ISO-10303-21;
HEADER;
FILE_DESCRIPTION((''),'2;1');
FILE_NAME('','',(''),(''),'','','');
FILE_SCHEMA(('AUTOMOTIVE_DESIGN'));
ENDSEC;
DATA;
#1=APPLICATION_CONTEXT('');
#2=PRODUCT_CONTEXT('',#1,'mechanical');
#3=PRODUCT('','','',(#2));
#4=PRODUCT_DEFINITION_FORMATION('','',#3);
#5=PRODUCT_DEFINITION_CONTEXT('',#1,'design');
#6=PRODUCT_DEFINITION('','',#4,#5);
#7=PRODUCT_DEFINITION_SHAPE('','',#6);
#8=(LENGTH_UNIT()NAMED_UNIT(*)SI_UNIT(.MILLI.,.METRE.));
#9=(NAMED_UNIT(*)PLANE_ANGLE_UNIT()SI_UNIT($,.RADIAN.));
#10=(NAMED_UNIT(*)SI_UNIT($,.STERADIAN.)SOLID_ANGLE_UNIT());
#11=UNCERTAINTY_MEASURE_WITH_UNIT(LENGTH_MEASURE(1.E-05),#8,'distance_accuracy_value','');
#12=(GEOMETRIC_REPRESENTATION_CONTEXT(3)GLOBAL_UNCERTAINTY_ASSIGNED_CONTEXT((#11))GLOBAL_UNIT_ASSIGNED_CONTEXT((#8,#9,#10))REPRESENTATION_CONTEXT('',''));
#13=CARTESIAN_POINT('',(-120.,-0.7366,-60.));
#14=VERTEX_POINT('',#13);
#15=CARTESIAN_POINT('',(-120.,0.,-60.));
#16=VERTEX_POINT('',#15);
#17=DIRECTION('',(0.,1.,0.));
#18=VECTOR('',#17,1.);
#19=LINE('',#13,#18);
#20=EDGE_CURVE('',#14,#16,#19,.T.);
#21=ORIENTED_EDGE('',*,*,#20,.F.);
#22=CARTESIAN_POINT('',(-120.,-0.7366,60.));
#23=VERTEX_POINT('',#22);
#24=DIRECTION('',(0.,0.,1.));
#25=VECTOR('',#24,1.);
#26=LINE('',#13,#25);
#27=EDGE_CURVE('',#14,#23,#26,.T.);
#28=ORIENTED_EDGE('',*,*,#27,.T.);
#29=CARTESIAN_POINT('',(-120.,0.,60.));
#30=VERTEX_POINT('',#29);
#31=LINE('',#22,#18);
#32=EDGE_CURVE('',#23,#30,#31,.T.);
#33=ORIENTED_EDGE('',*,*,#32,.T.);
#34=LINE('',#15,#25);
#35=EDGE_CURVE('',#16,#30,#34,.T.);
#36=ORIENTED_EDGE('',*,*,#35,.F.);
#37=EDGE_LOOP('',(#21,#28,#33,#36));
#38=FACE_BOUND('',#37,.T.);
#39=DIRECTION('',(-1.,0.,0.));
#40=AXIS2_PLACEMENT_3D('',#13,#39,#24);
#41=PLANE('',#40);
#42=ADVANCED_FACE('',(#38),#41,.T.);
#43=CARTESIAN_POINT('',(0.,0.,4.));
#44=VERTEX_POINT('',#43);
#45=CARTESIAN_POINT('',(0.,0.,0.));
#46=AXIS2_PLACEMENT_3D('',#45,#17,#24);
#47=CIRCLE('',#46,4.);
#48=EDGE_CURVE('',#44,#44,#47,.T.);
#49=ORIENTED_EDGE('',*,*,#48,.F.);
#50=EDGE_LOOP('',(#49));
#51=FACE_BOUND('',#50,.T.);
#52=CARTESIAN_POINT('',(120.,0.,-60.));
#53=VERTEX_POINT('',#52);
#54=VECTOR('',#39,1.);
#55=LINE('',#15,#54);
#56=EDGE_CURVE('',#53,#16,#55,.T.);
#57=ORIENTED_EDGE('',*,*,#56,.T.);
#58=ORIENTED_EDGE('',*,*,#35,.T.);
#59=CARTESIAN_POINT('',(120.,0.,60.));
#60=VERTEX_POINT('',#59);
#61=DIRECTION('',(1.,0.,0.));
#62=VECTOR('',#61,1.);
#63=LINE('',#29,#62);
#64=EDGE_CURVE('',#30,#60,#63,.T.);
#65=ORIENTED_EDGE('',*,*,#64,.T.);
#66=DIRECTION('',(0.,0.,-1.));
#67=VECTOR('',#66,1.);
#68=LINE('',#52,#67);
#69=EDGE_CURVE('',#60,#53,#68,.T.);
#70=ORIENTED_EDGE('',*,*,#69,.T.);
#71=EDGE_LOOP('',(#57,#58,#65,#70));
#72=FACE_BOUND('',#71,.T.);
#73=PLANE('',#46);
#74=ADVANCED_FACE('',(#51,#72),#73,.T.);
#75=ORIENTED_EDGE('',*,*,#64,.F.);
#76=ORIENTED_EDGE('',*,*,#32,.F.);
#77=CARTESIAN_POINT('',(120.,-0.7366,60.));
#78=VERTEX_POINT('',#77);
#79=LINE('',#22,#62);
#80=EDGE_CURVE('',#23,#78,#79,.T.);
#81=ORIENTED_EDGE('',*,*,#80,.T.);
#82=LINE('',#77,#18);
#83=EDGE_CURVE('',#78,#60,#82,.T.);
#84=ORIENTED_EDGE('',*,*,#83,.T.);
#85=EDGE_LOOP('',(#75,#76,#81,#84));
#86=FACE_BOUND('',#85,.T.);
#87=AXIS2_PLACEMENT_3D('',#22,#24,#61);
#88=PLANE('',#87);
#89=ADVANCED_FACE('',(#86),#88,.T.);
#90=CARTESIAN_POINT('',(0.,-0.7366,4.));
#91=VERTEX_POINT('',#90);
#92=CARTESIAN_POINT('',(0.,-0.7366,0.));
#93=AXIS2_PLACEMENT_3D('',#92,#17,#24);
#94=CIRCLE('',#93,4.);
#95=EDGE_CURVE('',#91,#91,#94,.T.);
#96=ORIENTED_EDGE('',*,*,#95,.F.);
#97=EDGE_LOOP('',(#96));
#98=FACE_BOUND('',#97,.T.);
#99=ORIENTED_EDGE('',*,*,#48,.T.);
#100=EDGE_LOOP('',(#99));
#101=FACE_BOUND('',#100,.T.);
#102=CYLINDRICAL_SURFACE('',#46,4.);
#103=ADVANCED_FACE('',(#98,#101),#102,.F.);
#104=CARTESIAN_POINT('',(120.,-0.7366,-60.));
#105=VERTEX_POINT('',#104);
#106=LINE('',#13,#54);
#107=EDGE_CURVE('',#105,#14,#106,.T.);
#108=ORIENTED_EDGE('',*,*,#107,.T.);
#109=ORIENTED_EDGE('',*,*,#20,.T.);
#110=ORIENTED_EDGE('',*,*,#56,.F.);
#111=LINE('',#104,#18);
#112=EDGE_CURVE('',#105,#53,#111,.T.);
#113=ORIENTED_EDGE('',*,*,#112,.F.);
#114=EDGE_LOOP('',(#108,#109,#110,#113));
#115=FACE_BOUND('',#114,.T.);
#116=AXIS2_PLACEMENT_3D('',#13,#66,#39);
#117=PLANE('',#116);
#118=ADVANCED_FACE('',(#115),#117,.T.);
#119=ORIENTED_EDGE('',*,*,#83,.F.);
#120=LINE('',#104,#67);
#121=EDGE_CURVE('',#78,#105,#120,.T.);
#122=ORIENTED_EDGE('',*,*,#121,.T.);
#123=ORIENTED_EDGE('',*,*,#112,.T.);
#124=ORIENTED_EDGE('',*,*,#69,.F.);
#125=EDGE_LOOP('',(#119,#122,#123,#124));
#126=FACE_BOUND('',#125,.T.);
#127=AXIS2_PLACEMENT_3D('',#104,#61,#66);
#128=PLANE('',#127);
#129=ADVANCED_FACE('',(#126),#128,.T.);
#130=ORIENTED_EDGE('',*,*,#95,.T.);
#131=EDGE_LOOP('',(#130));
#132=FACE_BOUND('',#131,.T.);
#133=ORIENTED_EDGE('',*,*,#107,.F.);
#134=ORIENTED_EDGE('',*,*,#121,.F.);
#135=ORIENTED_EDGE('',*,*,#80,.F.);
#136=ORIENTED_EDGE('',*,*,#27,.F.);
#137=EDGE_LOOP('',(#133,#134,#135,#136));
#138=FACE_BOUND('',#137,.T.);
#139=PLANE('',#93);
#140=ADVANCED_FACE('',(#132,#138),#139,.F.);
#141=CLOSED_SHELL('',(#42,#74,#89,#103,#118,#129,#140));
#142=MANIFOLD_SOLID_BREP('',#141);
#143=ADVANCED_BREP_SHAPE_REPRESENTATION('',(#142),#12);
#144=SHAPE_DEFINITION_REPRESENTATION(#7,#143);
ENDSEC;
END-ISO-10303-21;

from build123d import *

# Parameters (mm, degrees)
SKETCH1_W                = 240
SKETCH1_H                = 120
BASE_FLANGE1_DEPTH       = 0.7366
F_4_0_4_DIAMETER_HOLE1_D = 8


# Sheet-metal steps are written as plain solids
with BuildPart() as part:
    # Sketch1 → Base-Flange1 (new body)
    with BuildSketch(Plane(origin=(0, 0, 0), x_dir=(1, 0, 0), z_dir=(0, 1, 0))):
        Rectangle(SKETCH1_W, SKETCH1_H)
    extrude(amount=-BASE_FLANGE1_DEPTH)

    # Ø4.0 (4) Diameter Hole1 (through all)
    with Locations(Plane(origin=(0, 0, 0), x_dir=(1, 0, 0), z_dir=(0, 1, 0))):
        with Locations((0, 0)):
            Hole(F_4_0_4_DIAMETER_HOLE1_D / 2)


solid = part.part
